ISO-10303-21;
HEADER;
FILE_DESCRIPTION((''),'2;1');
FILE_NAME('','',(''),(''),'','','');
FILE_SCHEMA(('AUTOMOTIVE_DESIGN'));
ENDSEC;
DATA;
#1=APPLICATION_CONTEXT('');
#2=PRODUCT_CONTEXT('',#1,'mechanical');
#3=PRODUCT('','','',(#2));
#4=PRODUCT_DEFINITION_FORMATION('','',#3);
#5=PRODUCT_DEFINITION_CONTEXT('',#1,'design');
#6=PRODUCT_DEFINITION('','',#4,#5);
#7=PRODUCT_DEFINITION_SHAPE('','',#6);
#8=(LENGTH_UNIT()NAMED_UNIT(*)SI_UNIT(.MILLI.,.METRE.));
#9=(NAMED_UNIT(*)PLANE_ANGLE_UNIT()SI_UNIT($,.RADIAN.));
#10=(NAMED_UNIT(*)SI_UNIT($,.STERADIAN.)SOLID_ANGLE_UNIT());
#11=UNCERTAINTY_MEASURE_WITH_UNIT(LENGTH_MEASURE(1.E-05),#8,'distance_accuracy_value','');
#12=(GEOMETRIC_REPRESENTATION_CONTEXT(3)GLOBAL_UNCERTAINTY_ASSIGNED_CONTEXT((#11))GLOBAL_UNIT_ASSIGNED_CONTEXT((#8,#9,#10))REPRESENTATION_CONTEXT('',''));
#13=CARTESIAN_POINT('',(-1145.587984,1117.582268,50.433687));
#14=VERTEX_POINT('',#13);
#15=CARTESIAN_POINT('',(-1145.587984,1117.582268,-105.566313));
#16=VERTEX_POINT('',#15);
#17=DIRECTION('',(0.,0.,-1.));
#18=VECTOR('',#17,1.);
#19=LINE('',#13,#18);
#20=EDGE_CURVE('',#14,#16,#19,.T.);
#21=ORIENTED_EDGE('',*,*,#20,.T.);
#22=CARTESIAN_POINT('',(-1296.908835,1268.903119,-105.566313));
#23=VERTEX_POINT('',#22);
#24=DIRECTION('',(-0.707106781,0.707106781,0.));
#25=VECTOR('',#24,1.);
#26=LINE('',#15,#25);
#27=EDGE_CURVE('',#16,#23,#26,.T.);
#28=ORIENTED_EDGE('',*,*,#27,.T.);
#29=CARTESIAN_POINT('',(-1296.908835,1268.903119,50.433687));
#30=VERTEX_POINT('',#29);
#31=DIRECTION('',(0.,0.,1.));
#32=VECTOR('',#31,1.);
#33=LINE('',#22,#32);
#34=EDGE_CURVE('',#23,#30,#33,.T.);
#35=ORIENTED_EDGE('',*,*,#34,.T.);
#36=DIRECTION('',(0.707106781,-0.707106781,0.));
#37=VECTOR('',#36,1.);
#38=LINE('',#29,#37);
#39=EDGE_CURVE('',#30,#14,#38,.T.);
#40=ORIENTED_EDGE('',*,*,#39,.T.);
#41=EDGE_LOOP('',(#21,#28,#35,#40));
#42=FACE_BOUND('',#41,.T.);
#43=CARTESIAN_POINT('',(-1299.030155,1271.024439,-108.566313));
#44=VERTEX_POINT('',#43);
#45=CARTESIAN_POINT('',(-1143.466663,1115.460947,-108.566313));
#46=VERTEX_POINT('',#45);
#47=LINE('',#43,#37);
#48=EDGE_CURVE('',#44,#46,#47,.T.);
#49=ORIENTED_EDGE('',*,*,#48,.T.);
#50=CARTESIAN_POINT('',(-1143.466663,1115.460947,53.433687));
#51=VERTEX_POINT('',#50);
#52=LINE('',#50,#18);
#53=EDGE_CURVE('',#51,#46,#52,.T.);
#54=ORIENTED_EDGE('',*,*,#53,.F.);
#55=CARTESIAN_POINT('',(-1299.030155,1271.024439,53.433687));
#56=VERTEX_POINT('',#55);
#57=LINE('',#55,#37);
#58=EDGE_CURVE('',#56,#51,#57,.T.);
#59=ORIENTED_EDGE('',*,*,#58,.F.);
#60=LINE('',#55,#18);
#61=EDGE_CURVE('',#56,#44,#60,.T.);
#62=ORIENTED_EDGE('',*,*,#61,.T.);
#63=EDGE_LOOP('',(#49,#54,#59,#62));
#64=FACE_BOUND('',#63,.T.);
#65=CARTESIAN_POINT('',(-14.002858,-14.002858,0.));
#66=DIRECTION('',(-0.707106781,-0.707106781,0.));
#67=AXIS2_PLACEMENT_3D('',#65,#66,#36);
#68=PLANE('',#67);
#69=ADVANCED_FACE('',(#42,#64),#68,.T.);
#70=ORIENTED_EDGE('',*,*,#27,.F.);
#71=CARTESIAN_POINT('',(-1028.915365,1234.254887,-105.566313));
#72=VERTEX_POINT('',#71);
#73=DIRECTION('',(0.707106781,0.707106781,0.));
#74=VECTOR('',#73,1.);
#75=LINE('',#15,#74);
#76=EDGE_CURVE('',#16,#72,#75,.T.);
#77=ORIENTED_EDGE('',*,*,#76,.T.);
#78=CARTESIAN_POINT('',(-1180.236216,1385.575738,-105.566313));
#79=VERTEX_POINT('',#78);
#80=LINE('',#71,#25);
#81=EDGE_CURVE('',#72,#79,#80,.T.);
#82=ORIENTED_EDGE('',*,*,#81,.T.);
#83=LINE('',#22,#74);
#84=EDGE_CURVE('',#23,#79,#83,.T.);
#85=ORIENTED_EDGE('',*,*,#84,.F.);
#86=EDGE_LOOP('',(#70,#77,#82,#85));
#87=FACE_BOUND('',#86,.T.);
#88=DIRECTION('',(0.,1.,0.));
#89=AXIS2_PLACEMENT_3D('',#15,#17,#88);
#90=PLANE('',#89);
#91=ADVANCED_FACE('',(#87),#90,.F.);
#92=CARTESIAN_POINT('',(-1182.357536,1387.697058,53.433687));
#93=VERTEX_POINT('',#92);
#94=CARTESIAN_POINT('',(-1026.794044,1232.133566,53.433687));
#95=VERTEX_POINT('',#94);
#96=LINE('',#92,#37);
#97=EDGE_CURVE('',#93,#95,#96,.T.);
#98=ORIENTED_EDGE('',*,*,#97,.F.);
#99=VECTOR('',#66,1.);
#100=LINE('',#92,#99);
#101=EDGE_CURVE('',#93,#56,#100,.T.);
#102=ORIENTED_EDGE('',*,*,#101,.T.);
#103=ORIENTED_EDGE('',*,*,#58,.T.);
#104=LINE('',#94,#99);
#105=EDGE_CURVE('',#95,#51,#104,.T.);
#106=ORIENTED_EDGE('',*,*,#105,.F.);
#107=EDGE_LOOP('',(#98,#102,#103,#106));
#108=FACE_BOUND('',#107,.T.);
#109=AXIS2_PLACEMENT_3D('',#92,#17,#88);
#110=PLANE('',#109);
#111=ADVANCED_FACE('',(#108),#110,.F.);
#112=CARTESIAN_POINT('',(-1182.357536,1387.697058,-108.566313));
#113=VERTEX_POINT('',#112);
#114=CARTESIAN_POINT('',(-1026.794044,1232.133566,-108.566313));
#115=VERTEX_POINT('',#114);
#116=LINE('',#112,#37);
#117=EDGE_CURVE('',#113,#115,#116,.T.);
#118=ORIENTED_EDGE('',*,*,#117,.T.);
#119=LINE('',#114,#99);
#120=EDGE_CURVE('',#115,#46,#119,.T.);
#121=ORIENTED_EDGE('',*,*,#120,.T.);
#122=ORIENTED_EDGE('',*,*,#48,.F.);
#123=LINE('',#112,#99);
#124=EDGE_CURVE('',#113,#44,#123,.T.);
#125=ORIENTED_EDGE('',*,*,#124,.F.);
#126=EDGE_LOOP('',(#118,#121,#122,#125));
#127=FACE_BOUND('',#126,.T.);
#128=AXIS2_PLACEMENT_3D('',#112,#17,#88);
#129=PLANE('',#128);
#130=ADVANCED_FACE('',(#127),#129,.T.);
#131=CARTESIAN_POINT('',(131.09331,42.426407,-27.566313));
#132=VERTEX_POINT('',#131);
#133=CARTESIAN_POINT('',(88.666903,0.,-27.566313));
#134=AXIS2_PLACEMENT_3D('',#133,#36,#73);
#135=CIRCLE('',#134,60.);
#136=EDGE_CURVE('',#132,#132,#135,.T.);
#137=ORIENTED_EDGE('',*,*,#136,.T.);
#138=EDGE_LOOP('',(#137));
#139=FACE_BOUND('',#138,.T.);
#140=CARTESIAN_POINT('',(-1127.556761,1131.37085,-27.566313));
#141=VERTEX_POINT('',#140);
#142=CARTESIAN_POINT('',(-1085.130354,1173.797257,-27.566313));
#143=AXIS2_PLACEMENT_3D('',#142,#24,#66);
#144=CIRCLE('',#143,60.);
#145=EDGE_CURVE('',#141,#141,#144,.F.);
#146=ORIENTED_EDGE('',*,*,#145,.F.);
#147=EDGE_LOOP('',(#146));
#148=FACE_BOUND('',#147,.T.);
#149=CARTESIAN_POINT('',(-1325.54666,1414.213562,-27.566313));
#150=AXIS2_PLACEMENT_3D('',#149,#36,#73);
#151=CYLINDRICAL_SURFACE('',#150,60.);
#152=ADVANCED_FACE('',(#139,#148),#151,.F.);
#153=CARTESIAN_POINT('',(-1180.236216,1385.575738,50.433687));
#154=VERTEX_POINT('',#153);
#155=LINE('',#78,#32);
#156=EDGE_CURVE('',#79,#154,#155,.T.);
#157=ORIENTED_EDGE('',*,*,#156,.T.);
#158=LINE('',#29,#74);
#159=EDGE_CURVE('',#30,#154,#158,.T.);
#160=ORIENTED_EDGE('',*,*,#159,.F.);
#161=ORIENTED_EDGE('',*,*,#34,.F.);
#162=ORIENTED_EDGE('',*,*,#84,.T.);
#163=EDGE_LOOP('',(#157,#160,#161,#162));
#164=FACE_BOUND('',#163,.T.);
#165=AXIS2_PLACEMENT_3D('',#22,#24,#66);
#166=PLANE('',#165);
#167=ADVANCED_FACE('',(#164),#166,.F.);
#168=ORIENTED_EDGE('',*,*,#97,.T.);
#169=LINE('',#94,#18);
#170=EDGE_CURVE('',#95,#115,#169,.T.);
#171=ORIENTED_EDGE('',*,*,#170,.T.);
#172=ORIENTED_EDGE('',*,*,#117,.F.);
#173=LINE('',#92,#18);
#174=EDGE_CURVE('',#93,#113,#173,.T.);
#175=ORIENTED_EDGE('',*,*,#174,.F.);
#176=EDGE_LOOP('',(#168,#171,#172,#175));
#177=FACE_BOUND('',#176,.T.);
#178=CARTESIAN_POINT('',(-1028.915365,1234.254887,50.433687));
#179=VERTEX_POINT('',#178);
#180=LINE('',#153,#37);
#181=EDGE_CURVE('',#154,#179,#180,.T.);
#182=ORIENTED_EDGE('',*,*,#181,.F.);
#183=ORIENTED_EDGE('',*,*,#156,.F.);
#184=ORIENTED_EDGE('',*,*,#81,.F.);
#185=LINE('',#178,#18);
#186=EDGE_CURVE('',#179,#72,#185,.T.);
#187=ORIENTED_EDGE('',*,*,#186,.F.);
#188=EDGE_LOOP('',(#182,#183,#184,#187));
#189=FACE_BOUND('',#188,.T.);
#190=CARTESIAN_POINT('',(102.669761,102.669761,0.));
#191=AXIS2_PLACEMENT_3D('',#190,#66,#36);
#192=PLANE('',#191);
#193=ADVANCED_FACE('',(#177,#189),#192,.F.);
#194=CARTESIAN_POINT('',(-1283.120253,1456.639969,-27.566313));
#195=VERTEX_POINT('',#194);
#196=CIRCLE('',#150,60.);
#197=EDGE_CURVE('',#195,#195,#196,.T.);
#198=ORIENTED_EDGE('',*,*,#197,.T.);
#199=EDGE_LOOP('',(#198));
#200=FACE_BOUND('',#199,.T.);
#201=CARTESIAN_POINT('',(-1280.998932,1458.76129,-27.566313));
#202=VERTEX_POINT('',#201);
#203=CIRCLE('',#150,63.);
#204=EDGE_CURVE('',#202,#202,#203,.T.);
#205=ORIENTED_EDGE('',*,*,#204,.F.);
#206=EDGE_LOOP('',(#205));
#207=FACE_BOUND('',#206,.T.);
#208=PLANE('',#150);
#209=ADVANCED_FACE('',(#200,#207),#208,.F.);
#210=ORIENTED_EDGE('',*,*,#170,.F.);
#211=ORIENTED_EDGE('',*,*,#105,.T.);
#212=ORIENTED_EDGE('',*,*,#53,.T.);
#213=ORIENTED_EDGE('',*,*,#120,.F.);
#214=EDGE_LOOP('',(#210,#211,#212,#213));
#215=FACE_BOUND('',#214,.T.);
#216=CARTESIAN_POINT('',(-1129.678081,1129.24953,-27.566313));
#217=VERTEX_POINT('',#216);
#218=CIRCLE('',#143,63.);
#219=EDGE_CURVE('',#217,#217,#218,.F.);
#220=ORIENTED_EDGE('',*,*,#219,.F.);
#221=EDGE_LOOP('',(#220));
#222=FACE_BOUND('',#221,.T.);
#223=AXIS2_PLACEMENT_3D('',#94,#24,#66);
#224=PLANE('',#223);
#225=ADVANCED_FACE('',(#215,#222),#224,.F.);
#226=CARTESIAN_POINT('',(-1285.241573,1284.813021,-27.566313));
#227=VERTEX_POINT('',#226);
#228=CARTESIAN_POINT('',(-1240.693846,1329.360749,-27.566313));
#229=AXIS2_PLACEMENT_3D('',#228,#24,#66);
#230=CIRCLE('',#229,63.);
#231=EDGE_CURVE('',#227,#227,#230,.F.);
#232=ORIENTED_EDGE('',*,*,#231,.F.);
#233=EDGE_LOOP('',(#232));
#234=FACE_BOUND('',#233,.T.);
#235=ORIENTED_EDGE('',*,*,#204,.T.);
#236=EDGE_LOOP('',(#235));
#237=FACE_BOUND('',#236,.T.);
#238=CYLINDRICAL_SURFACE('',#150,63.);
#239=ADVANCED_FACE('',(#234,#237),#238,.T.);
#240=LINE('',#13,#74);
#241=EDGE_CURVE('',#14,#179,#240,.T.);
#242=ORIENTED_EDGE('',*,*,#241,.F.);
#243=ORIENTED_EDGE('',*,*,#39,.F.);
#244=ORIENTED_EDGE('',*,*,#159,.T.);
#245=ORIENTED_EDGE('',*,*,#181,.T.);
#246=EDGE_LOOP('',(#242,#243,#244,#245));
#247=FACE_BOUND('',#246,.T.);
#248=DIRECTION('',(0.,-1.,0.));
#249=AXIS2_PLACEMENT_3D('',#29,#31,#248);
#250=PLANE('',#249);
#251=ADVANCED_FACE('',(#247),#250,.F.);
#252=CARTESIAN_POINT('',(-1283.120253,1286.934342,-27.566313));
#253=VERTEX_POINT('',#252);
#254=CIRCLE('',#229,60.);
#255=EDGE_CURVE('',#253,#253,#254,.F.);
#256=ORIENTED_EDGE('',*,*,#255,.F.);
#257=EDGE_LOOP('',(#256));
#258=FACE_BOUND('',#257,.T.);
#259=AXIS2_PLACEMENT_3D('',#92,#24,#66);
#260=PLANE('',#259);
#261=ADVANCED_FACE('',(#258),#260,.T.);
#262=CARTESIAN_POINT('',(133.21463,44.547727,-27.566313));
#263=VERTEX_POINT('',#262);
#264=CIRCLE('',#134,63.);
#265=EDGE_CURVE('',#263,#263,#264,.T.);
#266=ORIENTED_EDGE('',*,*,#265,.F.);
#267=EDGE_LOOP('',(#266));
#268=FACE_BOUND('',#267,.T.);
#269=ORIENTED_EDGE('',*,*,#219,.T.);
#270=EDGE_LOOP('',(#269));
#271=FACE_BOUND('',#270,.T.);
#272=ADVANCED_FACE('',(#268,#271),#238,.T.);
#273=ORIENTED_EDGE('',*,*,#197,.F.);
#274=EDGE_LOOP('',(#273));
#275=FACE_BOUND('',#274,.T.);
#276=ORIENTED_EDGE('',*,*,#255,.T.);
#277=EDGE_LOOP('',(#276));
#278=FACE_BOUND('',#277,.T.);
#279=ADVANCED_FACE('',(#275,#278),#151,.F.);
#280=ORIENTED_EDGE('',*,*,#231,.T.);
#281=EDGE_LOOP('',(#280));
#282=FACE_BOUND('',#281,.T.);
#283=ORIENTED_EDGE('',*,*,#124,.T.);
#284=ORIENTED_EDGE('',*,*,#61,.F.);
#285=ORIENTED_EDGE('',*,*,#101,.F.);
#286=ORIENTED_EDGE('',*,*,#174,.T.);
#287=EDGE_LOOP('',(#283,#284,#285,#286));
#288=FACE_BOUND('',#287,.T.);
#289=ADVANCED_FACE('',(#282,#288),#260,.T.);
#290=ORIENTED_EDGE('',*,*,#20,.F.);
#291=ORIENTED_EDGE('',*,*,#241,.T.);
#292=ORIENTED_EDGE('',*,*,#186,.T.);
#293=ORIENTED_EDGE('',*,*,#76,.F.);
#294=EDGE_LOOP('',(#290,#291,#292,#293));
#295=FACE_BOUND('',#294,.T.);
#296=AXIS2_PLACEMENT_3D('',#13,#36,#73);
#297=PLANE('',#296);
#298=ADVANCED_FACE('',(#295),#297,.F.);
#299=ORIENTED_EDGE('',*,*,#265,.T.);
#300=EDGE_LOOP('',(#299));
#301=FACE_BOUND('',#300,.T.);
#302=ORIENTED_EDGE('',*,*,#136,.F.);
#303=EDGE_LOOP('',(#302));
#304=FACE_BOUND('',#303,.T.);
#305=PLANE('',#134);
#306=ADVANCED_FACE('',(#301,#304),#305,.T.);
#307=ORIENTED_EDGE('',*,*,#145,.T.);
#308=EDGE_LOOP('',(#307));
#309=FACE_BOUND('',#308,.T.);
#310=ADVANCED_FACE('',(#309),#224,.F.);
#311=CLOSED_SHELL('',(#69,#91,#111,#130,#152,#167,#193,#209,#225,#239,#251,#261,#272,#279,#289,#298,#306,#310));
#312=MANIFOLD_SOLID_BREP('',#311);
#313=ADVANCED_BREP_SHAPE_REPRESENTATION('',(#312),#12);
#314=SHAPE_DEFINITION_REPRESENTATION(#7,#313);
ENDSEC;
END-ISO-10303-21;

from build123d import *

# Parameters (mm, degrees)
CROQUIS1_R              = 63
CROQUIS1_R_2            = 60
SALIENTE_EXTRUIR1_DEPTH = 2000
CROQUIS3_W              = 162
CROQUIS3_H              = 220
SALIENTE_EXTRUIR2_DEPTH = 82.5
CROQUIS5_W              = 156
CROQUIS5_H              = 214
CORTAR_EXTRUIR1_DEPTH   = 165


with BuildPart() as part:
    # Croquis1 → Saliente-Extruir1 (new body)
    with BuildSketch(Plane(origin=(44.333451415, -44.333451415, 0), x_dir=(0, 0, -1), z_dir=(0.7071067811865438, -0.7071067811865512, 0))):
        with Locations((27.566313026, 62.696968258)):
            Circle(CROQUIS1_R)
        with Locations((27.566313026, 62.696968258)):
            Circle(CROQUIS1_R_2, mode=Mode.SUBTRACT)
    extrude(amount=-SALIENTE_EXTRUIR1_DEPTH)

    # Croquis3 → Saliente-Extruir2 (add, symmetric)
    with BuildSketch(Plane(origin=(44.333451415, 44.333451415, 0), x_dir=(0, 0, -1), z_dir=(0.7071067811865488, 0.7071067811865464, 0))):
        with Locations((27.566313026, 1707.303031742)):
            Rectangle(CROQUIS3_W, CROQUIS3_H)
    extrude(amount=SALIENTE_EXTRUIR2_DEPTH, both=True)

    # Croquis5 → Cortar-Extruir1 (cut)
    with BuildSketch(Plane(origin=(102.669760863, 102.669760863, 0), x_dir=(0, 0, -1), z_dir=(0.7071067811865485, 0.7071067811865467, 0))):
        with Locations((27.566313026, 1707.303031742)):
            Rectangle(CROQUIS5_W, CROQUIS5_H)
    extrude(amount=-CORTAR_EXTRUIR1_DEPTH, mode=Mode.SUBTRACT)


solid = part.part
